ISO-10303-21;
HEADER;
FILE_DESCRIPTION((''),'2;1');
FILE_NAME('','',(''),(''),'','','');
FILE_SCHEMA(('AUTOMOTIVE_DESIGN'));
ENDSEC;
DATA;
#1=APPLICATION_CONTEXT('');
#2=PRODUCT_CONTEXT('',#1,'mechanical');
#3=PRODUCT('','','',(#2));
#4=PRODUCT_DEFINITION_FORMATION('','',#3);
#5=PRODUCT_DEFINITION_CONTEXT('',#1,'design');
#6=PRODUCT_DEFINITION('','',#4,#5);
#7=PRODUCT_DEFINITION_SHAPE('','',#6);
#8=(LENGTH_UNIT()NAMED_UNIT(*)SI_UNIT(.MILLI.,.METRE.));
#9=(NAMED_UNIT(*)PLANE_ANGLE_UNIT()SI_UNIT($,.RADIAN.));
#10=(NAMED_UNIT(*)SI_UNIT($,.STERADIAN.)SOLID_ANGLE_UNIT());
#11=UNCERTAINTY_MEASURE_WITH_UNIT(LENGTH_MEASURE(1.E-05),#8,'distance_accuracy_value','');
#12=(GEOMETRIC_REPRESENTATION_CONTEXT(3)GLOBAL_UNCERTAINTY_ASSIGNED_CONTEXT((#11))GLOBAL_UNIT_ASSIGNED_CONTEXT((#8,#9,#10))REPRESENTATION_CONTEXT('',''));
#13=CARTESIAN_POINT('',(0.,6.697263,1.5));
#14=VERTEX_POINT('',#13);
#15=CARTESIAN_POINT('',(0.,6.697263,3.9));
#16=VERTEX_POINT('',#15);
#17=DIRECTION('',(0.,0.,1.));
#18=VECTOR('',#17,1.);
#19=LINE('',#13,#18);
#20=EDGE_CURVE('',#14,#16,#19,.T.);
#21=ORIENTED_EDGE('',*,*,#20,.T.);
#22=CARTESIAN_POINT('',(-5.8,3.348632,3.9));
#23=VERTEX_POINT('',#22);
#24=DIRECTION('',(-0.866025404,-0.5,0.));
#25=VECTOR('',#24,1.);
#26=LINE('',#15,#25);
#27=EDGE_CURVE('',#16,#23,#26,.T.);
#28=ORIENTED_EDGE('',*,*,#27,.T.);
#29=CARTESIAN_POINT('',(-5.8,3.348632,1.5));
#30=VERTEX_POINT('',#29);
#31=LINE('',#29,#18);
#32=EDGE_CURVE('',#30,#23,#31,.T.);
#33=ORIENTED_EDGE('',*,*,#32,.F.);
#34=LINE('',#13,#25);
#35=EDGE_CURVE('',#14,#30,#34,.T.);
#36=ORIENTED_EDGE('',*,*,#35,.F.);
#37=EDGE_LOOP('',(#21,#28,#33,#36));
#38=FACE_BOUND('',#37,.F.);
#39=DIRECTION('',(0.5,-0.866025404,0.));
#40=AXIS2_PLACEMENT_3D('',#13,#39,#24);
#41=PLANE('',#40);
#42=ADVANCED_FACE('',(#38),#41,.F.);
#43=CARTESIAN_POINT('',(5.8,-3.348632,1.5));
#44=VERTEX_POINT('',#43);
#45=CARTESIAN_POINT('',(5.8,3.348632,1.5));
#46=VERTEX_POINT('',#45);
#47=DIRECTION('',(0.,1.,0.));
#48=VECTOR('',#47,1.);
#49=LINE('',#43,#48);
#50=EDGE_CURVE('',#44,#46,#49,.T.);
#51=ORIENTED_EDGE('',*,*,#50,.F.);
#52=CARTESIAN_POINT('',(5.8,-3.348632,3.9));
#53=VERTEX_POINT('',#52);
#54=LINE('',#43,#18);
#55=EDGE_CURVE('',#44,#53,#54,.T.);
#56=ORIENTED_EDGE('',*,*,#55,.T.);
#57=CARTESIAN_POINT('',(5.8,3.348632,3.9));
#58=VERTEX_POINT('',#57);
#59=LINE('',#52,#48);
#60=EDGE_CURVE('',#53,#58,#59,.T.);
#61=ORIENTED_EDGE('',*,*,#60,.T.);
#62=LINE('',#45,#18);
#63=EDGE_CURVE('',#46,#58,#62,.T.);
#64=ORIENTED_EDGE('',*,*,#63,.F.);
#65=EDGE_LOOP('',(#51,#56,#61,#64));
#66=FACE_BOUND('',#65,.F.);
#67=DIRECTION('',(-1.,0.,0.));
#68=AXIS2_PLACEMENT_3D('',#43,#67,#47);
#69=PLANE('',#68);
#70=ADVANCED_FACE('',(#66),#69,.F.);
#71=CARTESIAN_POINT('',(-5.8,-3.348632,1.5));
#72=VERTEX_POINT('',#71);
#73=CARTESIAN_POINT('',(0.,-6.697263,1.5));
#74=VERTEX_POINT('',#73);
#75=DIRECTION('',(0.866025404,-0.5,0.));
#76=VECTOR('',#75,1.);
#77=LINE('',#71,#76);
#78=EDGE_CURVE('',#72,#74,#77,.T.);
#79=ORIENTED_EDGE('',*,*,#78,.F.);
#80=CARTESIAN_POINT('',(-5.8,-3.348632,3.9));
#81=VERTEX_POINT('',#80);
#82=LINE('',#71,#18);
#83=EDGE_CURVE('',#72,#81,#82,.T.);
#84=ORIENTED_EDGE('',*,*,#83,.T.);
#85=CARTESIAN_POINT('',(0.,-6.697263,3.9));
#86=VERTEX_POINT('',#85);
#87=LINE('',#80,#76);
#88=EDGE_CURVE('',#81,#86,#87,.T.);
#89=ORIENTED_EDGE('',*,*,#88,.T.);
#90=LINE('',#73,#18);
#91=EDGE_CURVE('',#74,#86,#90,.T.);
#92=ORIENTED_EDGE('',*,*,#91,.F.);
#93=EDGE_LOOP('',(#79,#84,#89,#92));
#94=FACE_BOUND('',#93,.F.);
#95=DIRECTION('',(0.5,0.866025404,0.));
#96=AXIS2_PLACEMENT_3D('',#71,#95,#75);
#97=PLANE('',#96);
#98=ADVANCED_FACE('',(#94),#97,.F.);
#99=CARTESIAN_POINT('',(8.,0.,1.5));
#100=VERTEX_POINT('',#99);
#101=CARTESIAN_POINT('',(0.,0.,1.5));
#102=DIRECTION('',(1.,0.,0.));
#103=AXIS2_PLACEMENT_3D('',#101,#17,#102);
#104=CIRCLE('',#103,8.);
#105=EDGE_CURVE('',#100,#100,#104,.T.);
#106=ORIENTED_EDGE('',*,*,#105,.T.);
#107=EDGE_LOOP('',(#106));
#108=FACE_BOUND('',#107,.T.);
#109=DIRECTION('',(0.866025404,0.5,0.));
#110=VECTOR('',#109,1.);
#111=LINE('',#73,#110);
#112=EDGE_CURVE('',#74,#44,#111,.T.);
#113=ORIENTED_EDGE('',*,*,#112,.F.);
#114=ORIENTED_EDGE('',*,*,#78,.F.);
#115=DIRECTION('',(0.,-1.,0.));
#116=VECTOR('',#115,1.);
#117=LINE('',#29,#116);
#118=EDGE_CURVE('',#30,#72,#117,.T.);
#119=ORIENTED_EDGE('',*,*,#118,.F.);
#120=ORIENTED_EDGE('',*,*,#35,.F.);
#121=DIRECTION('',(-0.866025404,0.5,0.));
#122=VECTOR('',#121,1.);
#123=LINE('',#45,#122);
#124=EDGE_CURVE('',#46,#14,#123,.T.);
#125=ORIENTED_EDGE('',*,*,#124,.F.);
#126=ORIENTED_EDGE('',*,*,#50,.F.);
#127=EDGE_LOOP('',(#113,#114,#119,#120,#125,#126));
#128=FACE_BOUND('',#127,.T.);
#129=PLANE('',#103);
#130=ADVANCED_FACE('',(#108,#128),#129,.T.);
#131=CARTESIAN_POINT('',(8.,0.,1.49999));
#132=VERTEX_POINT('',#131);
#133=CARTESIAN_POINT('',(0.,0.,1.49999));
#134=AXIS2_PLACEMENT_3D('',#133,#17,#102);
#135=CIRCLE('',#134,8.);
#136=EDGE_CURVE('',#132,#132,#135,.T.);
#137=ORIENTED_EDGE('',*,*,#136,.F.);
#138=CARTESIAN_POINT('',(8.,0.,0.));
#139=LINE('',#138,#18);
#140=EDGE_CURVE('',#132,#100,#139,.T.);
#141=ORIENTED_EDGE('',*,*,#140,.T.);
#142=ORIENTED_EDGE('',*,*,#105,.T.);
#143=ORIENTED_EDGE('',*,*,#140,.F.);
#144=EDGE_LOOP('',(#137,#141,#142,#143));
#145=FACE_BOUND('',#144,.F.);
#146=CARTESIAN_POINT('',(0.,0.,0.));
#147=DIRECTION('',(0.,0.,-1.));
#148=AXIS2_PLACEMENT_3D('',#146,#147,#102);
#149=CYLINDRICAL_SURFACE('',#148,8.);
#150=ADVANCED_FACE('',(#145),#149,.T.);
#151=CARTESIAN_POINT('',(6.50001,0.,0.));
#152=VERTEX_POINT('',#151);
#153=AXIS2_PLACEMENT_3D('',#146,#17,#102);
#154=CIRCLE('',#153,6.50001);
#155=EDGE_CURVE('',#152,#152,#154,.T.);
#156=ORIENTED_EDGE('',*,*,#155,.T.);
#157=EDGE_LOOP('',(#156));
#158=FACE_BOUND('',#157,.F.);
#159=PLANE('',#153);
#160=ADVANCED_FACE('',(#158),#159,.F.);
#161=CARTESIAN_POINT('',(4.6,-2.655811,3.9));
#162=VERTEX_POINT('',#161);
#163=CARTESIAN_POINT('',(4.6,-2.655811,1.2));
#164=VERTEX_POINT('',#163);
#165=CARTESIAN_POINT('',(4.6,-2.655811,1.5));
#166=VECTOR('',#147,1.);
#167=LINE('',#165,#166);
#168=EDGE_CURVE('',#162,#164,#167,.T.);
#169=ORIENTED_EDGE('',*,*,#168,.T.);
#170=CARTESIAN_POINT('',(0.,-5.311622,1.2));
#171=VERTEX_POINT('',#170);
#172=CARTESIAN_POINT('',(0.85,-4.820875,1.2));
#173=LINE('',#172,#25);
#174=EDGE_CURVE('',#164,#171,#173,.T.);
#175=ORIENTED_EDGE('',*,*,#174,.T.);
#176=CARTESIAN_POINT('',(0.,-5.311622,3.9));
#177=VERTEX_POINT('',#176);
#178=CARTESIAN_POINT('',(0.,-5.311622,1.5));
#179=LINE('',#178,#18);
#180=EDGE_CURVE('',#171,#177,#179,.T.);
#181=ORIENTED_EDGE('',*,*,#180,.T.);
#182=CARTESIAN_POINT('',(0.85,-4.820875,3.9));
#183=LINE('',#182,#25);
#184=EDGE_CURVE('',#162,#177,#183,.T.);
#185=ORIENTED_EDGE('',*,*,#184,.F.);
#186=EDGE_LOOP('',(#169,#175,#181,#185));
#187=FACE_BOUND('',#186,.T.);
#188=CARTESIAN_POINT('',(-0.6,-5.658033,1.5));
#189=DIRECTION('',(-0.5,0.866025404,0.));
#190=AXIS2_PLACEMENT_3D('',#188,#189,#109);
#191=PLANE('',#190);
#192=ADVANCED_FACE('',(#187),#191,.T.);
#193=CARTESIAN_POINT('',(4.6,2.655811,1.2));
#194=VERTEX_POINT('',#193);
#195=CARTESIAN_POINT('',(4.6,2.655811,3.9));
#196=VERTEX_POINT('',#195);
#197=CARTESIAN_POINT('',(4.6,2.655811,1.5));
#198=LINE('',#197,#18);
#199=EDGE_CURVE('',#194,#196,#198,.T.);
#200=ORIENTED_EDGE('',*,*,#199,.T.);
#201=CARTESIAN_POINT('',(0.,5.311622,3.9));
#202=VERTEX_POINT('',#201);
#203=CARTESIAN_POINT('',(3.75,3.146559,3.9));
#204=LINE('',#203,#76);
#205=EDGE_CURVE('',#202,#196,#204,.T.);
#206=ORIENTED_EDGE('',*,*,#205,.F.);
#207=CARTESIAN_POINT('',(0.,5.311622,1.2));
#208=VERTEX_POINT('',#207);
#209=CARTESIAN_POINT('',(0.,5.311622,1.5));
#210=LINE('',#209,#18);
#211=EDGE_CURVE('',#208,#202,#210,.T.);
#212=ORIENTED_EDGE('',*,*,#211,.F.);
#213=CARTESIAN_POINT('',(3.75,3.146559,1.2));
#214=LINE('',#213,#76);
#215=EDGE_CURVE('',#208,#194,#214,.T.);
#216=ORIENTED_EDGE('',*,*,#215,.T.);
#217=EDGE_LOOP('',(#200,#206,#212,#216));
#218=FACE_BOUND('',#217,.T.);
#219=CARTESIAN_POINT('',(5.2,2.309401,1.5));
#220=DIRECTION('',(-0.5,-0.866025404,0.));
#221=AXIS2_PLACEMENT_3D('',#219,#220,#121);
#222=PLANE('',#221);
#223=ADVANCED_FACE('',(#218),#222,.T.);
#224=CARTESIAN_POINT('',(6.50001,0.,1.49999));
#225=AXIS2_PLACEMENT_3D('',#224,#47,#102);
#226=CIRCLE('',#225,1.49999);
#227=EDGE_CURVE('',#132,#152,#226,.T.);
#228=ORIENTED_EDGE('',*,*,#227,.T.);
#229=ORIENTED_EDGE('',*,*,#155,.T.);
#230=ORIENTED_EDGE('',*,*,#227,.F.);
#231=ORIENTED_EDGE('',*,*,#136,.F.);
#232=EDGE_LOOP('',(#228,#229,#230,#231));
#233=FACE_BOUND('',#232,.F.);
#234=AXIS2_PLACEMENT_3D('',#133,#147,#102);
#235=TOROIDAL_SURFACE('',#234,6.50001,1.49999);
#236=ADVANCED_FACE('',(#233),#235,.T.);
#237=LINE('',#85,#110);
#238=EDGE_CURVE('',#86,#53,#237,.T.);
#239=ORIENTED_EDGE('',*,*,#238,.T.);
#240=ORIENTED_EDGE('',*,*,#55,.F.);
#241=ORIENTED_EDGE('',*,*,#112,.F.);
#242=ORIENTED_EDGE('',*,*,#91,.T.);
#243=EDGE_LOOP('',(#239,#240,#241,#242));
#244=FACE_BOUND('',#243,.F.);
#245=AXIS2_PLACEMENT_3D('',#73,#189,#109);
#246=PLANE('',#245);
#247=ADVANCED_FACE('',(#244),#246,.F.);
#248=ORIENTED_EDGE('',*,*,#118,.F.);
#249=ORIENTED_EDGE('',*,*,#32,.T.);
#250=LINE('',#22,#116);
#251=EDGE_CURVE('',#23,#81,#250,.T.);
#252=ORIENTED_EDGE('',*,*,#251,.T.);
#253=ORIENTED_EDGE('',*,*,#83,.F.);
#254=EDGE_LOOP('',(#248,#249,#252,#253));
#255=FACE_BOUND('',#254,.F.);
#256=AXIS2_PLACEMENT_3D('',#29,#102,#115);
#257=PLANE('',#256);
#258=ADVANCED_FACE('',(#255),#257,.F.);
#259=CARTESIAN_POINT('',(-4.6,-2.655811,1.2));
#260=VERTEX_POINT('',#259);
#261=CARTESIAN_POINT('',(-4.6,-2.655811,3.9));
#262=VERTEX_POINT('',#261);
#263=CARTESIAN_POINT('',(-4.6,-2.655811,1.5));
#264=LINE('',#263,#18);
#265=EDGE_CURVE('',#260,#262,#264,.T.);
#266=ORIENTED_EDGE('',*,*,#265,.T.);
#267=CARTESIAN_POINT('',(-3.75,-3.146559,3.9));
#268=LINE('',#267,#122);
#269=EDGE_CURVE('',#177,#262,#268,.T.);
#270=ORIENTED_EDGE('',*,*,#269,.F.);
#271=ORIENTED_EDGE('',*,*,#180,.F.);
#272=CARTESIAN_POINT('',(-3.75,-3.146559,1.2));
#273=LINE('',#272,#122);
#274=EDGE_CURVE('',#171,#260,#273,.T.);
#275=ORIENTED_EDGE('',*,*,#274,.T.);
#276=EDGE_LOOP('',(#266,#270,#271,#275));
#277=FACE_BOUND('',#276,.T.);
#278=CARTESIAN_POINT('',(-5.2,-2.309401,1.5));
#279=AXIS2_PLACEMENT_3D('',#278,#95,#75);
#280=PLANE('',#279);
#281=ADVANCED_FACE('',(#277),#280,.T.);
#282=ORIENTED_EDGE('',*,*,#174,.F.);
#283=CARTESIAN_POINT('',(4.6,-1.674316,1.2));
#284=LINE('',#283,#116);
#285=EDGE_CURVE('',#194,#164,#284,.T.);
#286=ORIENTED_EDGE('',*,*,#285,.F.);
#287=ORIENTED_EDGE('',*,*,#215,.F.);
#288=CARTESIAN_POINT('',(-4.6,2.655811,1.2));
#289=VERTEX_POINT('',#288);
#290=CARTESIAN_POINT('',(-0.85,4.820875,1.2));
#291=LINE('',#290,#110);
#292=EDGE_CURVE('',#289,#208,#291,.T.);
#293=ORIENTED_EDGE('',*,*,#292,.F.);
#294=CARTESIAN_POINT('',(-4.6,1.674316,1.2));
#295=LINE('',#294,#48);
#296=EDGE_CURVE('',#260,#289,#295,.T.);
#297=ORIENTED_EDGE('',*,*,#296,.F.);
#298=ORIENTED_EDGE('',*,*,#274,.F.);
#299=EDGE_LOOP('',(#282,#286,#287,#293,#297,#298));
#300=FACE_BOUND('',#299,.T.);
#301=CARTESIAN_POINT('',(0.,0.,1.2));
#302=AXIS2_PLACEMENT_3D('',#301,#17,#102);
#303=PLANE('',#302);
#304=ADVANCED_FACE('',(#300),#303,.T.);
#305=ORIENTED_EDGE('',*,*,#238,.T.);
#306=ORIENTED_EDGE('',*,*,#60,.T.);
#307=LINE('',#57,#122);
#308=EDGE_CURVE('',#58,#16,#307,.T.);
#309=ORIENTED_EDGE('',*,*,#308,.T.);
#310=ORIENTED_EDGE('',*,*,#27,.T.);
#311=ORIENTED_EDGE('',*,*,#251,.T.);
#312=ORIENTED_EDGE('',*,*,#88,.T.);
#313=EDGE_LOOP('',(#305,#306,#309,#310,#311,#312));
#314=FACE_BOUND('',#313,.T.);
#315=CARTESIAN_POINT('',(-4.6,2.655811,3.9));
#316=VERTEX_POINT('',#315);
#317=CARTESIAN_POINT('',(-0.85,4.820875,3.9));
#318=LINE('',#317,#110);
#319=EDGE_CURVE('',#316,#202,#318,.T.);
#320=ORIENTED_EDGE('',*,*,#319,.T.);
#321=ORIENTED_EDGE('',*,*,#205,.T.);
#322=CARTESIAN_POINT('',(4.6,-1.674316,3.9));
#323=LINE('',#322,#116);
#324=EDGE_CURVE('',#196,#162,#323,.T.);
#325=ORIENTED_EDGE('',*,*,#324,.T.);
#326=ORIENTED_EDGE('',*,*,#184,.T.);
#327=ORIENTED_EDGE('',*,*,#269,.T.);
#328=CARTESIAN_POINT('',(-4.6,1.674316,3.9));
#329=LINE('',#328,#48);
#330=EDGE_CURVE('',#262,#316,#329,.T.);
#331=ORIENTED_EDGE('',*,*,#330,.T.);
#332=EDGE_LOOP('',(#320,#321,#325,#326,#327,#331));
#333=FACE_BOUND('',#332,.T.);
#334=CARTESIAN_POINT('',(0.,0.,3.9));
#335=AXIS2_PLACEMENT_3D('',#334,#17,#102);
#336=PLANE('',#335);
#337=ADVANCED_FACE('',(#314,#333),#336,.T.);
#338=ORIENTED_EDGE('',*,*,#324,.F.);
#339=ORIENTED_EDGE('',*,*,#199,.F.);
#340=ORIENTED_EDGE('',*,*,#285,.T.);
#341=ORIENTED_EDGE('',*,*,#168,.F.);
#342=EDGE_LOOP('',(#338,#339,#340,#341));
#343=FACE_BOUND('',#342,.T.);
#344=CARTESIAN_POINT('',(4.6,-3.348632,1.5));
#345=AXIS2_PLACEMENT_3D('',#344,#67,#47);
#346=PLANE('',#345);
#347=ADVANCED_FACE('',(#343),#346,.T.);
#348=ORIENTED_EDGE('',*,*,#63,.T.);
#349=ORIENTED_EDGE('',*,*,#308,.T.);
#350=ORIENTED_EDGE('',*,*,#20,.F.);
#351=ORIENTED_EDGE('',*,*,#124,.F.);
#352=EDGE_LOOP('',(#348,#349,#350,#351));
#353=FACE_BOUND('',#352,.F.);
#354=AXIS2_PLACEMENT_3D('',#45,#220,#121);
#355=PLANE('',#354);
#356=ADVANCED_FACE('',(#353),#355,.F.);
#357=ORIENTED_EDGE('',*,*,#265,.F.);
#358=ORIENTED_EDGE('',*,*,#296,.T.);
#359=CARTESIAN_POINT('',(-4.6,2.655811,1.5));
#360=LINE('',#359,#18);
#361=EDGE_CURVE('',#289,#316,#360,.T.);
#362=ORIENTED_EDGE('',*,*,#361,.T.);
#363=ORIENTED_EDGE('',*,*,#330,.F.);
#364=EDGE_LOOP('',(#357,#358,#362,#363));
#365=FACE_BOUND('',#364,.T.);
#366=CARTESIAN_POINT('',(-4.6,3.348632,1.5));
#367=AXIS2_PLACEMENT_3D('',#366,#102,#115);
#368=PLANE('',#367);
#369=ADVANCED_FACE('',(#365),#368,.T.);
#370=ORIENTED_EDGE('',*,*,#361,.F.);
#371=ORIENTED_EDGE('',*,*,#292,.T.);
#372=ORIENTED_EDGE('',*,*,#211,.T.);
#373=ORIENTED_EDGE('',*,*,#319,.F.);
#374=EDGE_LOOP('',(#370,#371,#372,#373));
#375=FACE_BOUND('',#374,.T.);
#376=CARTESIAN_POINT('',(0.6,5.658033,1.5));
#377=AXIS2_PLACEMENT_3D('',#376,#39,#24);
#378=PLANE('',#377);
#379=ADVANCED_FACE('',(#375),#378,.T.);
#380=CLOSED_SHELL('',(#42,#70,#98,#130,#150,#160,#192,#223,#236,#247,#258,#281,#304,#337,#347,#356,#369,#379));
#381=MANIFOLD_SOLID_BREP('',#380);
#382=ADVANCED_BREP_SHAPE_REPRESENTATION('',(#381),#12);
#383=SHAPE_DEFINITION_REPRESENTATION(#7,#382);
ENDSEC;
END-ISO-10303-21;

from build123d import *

# Parameters (mm, degrees)
F0_R     = 8
F1_DEPTH = 1.5
F3_DEPTH = 2.4
F4_T     = -1.2
F5_R     = 1.49999


# Not quite as in the source:
# - a fillet or chamfer is up to 0.001 mm smaller than in the source, because OpenCascade refuses the exact size


with BuildPart() as f1:
    # F0 (on Top) → F1 (new body)
    with BuildSketch(Plane.XY):
        Circle(F0_R)
    extrude(amount=F1_DEPTH)

    # F2 (on face) → F3 (join)
    with BuildSketch(Plane.XY.offset(1.5)):
        Polygon((5.8, -3.3486315613), (5.8, 3.3486315613), (0, 6.6972631226), (-5.8, 3.3486315613), (-5.8, -3.3486315613), (0, -6.6972631226), align=None)
    extrude(amount=F3_DEPTH)

    # F4
    f4_openings = [f1.faces().sort_by_distance(p)[0] for p in [
        (0, 0, 3.9),
    ]]
    offset(amount=F4_T, openings=f4_openings, kind=Kind.INTERSECTION)

    # F5 (radius 1.5 in the source; OpenCascade refuses exactly that, so slightly less here)
    f5_edges = [f1.edges().sort_by_distance(p)[0] for p in [
        (-8, 0, 0),
    ]]
    fillet(f5_edges, radius=F5_R)


solid = f1.part
